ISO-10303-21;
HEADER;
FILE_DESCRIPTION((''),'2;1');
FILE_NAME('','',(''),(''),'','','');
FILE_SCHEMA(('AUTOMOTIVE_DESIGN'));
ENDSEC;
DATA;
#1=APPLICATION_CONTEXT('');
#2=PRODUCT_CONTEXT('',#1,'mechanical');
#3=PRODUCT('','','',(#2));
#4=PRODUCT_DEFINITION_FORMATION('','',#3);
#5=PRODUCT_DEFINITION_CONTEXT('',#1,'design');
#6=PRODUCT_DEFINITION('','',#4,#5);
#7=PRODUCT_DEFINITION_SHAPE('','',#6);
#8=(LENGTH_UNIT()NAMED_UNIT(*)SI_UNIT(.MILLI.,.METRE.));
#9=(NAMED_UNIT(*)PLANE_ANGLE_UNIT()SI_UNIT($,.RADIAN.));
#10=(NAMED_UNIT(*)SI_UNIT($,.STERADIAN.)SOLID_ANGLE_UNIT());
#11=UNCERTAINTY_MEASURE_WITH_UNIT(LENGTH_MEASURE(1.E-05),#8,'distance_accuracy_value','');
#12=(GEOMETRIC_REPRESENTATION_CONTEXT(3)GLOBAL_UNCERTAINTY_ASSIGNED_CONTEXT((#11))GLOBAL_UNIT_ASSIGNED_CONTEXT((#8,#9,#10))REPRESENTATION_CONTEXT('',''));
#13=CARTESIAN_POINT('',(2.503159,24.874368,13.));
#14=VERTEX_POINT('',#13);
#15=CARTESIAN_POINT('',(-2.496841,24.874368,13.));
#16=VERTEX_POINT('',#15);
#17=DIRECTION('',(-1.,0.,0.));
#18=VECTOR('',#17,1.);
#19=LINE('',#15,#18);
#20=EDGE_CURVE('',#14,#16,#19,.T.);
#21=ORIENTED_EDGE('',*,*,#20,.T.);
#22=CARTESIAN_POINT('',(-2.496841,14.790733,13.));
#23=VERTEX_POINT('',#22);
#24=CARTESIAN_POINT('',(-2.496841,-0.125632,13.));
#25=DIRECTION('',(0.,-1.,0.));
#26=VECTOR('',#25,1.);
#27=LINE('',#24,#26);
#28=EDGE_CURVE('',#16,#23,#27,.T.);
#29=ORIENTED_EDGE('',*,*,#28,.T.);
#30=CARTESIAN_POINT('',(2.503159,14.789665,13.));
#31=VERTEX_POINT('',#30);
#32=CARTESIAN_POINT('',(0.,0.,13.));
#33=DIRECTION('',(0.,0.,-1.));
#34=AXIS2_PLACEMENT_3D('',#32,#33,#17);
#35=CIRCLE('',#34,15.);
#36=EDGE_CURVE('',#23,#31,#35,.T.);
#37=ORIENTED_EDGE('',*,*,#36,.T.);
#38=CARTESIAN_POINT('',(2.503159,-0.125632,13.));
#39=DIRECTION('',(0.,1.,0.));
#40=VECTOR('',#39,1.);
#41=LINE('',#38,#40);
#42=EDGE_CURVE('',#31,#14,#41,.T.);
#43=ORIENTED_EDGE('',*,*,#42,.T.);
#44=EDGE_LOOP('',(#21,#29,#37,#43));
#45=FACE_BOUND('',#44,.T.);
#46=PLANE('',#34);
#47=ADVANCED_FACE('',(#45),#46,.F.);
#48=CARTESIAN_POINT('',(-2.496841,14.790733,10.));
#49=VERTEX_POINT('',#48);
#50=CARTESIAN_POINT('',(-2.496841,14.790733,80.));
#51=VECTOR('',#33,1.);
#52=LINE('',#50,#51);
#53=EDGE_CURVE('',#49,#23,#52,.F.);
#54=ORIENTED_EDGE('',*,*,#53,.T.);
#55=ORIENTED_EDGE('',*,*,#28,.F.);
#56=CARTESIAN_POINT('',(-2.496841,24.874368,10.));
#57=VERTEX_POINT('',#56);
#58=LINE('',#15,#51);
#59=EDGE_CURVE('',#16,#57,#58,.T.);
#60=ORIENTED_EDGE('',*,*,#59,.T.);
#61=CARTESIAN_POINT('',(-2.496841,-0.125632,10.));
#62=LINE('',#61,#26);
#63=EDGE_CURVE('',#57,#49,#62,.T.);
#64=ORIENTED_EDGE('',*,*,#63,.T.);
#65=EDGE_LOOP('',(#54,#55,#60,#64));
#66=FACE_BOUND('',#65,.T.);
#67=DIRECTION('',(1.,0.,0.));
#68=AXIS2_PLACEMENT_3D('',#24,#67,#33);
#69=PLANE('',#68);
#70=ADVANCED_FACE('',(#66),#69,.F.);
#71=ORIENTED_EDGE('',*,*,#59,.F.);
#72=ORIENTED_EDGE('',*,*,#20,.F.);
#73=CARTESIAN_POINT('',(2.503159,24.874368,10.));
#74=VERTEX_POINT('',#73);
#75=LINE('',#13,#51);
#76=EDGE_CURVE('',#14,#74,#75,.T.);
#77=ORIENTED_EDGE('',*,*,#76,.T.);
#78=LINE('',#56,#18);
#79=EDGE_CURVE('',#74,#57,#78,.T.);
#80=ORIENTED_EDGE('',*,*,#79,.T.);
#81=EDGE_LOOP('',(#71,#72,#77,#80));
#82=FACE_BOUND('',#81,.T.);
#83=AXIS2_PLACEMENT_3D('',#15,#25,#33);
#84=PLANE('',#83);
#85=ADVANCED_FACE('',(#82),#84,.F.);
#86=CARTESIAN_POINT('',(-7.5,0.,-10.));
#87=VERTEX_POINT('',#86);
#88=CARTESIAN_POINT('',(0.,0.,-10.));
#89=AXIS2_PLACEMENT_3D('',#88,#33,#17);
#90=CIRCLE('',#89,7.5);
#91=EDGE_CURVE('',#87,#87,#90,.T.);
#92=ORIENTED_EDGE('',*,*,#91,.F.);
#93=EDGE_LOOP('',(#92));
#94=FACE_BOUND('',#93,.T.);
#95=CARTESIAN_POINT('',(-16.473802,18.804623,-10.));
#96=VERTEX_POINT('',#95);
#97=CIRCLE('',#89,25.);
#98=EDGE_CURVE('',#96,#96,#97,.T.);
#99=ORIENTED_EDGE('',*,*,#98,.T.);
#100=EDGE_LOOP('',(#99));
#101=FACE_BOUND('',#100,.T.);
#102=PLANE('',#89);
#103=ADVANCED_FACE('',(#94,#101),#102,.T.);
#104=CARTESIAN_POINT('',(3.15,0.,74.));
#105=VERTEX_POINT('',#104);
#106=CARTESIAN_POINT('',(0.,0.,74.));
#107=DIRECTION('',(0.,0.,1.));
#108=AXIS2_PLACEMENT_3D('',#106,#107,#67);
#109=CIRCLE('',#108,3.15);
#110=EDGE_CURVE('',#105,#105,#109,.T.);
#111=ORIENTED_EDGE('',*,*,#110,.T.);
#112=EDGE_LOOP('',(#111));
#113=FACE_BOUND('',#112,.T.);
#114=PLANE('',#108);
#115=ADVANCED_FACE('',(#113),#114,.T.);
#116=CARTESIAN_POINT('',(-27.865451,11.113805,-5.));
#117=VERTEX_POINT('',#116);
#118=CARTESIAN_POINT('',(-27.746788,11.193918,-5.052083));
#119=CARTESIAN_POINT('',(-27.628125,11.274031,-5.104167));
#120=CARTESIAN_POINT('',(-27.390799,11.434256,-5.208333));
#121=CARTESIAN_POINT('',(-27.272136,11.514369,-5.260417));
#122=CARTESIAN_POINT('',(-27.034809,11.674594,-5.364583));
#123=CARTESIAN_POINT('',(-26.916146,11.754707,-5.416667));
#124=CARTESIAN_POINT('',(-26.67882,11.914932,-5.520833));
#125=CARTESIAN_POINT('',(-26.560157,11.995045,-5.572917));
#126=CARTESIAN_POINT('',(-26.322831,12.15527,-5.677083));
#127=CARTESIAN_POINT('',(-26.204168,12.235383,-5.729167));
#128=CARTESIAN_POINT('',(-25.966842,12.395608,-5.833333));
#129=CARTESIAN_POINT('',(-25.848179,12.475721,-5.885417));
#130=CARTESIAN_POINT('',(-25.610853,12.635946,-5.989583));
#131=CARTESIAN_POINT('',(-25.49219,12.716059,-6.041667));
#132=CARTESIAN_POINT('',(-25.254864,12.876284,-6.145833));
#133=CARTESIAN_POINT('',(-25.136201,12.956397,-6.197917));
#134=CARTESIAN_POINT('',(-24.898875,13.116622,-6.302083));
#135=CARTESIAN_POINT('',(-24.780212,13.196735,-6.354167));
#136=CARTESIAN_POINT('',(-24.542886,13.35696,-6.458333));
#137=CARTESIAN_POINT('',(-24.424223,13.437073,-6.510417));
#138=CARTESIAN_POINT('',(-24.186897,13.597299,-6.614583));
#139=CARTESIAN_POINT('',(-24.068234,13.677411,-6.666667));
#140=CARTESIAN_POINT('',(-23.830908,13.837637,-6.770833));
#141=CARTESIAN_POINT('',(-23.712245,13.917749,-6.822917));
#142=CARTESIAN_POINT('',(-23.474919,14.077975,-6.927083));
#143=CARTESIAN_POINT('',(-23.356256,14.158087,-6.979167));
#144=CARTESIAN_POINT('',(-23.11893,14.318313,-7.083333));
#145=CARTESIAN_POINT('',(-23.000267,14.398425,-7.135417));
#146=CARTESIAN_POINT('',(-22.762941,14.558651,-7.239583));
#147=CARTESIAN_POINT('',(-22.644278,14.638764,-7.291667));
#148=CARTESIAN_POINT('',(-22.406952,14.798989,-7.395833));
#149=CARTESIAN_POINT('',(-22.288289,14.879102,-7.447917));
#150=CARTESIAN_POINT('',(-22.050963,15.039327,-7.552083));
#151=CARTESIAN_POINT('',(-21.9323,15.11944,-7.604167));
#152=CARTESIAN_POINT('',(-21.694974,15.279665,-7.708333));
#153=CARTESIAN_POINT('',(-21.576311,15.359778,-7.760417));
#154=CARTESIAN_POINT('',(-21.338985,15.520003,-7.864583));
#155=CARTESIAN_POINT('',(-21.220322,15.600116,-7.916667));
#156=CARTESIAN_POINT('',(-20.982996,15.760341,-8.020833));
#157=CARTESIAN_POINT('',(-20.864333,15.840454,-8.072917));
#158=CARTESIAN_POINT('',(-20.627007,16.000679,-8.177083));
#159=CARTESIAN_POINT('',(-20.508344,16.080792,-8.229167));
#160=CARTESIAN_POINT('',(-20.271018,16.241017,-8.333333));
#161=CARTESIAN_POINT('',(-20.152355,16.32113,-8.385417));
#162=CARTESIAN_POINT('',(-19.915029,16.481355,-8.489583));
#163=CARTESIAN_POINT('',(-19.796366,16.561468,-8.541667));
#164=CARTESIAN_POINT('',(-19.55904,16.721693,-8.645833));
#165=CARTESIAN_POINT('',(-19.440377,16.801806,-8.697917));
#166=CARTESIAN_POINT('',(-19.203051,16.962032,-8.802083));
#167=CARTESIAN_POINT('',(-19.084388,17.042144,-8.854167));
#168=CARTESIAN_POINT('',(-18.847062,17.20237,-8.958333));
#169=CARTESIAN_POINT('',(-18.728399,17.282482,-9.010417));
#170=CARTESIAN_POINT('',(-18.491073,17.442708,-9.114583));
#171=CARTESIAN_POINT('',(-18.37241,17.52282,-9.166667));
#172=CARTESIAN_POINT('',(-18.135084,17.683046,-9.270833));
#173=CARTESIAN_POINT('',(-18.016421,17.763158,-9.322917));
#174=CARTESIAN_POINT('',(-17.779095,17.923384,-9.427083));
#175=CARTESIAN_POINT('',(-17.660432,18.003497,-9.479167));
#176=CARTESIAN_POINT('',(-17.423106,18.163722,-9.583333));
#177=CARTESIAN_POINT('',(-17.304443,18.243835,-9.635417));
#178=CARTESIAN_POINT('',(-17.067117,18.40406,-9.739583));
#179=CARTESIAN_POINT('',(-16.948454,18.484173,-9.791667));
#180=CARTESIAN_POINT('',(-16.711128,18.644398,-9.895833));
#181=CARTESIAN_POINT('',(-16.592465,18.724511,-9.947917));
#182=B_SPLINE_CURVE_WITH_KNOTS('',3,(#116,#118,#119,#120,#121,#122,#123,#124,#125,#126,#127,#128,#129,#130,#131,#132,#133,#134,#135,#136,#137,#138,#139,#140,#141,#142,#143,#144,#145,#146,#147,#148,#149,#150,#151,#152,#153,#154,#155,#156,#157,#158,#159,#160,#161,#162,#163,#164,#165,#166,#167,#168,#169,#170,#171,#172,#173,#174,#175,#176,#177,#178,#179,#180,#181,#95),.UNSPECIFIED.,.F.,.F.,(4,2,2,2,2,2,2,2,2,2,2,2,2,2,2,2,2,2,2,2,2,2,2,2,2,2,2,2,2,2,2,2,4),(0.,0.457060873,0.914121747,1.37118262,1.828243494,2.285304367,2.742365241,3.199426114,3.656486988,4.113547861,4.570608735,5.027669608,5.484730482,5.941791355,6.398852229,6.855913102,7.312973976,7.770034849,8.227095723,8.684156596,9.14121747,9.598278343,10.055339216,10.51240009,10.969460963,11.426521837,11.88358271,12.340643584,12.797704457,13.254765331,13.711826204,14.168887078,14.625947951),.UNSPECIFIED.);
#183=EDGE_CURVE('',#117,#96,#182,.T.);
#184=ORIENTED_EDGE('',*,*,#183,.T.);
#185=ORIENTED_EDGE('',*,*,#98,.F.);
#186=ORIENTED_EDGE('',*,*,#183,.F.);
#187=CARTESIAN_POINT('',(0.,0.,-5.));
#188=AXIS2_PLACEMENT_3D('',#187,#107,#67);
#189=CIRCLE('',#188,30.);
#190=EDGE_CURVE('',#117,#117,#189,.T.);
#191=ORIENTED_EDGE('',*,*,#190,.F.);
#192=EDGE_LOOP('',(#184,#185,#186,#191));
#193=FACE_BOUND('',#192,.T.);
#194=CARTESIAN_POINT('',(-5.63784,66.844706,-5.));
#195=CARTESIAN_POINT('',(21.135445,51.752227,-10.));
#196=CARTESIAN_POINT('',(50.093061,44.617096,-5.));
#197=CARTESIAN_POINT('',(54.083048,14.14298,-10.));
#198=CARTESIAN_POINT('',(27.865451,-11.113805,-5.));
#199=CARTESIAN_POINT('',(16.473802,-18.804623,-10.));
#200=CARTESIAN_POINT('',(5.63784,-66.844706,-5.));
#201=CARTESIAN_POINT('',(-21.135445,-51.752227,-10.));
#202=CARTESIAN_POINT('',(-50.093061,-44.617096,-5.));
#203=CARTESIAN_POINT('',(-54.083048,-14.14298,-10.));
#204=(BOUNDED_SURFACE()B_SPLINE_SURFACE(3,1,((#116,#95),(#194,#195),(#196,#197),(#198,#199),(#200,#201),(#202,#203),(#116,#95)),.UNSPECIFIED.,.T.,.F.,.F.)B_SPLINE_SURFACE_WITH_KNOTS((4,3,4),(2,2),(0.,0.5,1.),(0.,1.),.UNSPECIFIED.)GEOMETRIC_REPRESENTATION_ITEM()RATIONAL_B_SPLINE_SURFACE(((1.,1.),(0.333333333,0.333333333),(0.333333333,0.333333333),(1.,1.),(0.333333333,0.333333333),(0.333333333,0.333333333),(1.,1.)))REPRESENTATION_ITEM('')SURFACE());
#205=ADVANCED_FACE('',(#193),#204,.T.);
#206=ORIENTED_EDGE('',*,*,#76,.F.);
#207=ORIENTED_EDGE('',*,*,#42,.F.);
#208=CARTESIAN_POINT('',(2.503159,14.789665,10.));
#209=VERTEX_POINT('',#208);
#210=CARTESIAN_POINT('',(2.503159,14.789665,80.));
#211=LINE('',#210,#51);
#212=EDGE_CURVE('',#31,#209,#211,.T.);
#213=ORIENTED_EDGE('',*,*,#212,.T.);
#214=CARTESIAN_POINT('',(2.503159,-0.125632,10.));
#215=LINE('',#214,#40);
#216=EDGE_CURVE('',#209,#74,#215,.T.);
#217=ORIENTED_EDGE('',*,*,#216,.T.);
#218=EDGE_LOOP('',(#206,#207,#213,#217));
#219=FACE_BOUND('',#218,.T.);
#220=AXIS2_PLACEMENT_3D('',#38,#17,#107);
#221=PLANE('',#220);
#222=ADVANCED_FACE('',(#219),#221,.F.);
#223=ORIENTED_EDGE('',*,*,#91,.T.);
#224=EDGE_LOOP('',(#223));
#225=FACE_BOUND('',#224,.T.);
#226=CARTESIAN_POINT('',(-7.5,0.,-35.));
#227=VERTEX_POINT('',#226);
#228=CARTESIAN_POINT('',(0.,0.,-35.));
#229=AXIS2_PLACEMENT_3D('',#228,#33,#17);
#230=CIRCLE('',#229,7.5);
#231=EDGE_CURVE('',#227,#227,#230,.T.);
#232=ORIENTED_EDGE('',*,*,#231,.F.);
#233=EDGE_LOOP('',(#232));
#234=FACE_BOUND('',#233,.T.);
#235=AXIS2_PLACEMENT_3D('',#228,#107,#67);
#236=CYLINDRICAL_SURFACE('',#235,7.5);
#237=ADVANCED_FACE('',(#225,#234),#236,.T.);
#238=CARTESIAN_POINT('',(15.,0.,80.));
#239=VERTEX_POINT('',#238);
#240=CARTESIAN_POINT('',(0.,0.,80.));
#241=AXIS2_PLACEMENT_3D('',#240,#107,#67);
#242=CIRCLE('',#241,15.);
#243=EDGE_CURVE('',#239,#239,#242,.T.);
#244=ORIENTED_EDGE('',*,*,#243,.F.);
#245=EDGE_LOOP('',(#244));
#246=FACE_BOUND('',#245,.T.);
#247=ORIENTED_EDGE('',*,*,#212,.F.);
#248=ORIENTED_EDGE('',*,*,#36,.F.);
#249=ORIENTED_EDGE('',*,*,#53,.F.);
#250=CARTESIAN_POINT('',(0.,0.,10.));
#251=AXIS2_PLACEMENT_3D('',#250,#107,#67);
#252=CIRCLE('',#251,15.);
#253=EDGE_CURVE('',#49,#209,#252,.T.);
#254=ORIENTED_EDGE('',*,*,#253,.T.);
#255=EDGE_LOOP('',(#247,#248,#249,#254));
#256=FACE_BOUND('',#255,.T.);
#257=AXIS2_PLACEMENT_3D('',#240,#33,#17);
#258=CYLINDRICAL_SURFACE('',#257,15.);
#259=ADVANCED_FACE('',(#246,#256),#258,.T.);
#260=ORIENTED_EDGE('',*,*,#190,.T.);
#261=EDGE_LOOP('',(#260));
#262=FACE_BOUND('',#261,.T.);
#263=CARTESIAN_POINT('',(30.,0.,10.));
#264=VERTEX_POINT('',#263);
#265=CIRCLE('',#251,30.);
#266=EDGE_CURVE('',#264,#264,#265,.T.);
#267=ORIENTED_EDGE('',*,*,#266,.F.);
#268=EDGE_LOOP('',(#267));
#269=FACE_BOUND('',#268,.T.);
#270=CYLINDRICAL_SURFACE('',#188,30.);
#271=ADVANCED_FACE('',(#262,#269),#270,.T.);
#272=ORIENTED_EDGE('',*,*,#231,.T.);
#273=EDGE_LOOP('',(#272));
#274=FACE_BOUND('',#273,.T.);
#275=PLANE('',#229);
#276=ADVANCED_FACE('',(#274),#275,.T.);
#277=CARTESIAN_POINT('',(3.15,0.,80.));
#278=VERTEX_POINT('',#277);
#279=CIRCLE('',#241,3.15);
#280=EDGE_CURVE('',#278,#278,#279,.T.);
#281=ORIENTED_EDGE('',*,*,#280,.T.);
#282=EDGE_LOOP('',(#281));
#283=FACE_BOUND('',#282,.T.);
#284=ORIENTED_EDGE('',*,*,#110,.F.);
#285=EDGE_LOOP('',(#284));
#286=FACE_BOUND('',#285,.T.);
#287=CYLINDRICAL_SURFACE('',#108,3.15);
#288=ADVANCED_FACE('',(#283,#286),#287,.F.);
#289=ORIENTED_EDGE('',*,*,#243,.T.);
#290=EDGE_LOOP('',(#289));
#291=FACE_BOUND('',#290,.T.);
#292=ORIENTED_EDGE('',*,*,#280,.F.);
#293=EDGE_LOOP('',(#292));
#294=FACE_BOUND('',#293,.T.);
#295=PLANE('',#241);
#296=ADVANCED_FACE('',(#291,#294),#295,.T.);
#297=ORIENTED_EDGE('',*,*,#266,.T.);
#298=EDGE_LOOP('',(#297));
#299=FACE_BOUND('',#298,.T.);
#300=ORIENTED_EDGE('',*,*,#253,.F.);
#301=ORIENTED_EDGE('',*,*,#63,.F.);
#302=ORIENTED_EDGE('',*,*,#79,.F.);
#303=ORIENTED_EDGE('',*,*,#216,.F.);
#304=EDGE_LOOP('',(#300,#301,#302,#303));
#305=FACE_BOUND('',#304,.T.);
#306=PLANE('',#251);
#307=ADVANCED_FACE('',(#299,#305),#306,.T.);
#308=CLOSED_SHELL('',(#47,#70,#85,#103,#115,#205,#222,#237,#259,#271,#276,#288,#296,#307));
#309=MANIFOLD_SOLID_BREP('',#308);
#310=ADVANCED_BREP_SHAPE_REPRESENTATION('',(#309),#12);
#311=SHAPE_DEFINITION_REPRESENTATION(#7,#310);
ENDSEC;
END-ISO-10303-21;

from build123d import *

# Parameters (mm, degrees)
SKETCH1_R           = 15
BOSS_EXTRUDE1_DEPTH = 80
SKETCH1_2_R         = 15
SKETCH2_R           = 25
SKETCH3_R           = 7.5
BOSS_EXTRUDE2_DEPTH = 25
SKETCH4_W           = 5
SKETCH4_H           = 25
BOSS_EXTRUDE3_DEPTH = 3
SKETCH5_R           = 3.15
CUT_EXTRUDE1_DEPTH  = 6
SKETCH6_R           = 30
BOSS_EXTRUDE4_DEPTH = 15


with BuildPart() as part:
    # Sketch1 → Boss-Extrude1 (new body)
    with BuildSketch(Plane.XY):
        Circle(SKETCH1_R)
    extrude(amount=BOSS_EXTRUDE1_DEPTH)

    # Sketch1<2> → Loft1 section 0
    with BuildSketch(Plane.XY):
        Circle(SKETCH1_2_R)
    # Sketch2 → Loft1 section 1
    with BuildSketch(Plane(origin=(0, 0, -10), x_dir=(-1, 0, 0), z_dir=(0, 0, -1))):
        Circle(SKETCH2_R)
    loft()

    # Sketch3 → Boss-Extrude2 (add)
    with BuildSketch(Plane(origin=(0, 0, -10), x_dir=(-1, 0, 0), z_dir=(0, 0, -1))):
        Circle(SKETCH3_R)
    extrude(amount=BOSS_EXTRUDE2_DEPTH)

    # Sketch4 → Boss-Extrude3 (add)
    with BuildSketch(Plane.XY.offset(10)):
        with Locations((0.003158662, 12.374368268)):
            Rectangle(SKETCH4_W, SKETCH4_H)
    extrude(amount=BOSS_EXTRUDE3_DEPTH)

    # Sketch5 → Cut-Extrude1 (cut)
    with BuildSketch(Plane.XY.offset(80)):
        Circle(SKETCH5_R)
    extrude(amount=-CUT_EXTRUDE1_DEPTH, mode=Mode.SUBTRACT)

    # Sketch6 → Boss-Extrude4 (add)
    with BuildSketch(Plane.XY.offset(10)):
        Circle(SKETCH6_R)
    extrude(amount=-BOSS_EXTRUDE4_DEPTH)

    # Loft3: read off the stored shape, not the designer's step
    # Loft3: loft between two sections, ruled curve by curve
    loft3_from = [
        Edge.make_bspline([(-27.865450574, 11.113805123, -5), (-5.637840328, 66.844706271, -5), (50.09306082, 44.617096025, -5), (27.865450574, -11.113805123, -5), (5.637840328, -66.844706271, -5), (-50.09306082, -44.617096025, -5), (-27.865450574, 11.113805123, -5)], [0, 0, 0, 0, 0.5, 0.5, 0.5, 1, 1, 1, 1], 3, [1, 0.333333333, 0.333333333, 1, 0.333333333, 0.333333333, 1]),
    ]
    loft3_to = [
        Edge.make_bspline([(-16.473801558, 18.804623427, -10), (21.135445295, 51.752226543, -10), (54.083048412, 14.14297969, -10), (16.473801558, -18.804623427, -10), (-21.135445295, -51.752226543, -10), (-54.083048412, -14.14297969, -10), (-16.473801558, 18.804623427, -10)], [0, 0, 0, 0, 0.5, 0.5, 0.5, 1, 1, 1, 1], 3, [1, 0.333333333, 0.333333333, 1, 0.333333333, 0.333333333, 1]),
    ]
    loft3 = Solid(Shell([*[Face.make_surface_from_curves(loft3_from[k], loft3_to[k]) for k in range(1)], Face(Wire(loft3_from)), Face(Wire(loft3_to))]))
    add(loft3)


solid = part.part
